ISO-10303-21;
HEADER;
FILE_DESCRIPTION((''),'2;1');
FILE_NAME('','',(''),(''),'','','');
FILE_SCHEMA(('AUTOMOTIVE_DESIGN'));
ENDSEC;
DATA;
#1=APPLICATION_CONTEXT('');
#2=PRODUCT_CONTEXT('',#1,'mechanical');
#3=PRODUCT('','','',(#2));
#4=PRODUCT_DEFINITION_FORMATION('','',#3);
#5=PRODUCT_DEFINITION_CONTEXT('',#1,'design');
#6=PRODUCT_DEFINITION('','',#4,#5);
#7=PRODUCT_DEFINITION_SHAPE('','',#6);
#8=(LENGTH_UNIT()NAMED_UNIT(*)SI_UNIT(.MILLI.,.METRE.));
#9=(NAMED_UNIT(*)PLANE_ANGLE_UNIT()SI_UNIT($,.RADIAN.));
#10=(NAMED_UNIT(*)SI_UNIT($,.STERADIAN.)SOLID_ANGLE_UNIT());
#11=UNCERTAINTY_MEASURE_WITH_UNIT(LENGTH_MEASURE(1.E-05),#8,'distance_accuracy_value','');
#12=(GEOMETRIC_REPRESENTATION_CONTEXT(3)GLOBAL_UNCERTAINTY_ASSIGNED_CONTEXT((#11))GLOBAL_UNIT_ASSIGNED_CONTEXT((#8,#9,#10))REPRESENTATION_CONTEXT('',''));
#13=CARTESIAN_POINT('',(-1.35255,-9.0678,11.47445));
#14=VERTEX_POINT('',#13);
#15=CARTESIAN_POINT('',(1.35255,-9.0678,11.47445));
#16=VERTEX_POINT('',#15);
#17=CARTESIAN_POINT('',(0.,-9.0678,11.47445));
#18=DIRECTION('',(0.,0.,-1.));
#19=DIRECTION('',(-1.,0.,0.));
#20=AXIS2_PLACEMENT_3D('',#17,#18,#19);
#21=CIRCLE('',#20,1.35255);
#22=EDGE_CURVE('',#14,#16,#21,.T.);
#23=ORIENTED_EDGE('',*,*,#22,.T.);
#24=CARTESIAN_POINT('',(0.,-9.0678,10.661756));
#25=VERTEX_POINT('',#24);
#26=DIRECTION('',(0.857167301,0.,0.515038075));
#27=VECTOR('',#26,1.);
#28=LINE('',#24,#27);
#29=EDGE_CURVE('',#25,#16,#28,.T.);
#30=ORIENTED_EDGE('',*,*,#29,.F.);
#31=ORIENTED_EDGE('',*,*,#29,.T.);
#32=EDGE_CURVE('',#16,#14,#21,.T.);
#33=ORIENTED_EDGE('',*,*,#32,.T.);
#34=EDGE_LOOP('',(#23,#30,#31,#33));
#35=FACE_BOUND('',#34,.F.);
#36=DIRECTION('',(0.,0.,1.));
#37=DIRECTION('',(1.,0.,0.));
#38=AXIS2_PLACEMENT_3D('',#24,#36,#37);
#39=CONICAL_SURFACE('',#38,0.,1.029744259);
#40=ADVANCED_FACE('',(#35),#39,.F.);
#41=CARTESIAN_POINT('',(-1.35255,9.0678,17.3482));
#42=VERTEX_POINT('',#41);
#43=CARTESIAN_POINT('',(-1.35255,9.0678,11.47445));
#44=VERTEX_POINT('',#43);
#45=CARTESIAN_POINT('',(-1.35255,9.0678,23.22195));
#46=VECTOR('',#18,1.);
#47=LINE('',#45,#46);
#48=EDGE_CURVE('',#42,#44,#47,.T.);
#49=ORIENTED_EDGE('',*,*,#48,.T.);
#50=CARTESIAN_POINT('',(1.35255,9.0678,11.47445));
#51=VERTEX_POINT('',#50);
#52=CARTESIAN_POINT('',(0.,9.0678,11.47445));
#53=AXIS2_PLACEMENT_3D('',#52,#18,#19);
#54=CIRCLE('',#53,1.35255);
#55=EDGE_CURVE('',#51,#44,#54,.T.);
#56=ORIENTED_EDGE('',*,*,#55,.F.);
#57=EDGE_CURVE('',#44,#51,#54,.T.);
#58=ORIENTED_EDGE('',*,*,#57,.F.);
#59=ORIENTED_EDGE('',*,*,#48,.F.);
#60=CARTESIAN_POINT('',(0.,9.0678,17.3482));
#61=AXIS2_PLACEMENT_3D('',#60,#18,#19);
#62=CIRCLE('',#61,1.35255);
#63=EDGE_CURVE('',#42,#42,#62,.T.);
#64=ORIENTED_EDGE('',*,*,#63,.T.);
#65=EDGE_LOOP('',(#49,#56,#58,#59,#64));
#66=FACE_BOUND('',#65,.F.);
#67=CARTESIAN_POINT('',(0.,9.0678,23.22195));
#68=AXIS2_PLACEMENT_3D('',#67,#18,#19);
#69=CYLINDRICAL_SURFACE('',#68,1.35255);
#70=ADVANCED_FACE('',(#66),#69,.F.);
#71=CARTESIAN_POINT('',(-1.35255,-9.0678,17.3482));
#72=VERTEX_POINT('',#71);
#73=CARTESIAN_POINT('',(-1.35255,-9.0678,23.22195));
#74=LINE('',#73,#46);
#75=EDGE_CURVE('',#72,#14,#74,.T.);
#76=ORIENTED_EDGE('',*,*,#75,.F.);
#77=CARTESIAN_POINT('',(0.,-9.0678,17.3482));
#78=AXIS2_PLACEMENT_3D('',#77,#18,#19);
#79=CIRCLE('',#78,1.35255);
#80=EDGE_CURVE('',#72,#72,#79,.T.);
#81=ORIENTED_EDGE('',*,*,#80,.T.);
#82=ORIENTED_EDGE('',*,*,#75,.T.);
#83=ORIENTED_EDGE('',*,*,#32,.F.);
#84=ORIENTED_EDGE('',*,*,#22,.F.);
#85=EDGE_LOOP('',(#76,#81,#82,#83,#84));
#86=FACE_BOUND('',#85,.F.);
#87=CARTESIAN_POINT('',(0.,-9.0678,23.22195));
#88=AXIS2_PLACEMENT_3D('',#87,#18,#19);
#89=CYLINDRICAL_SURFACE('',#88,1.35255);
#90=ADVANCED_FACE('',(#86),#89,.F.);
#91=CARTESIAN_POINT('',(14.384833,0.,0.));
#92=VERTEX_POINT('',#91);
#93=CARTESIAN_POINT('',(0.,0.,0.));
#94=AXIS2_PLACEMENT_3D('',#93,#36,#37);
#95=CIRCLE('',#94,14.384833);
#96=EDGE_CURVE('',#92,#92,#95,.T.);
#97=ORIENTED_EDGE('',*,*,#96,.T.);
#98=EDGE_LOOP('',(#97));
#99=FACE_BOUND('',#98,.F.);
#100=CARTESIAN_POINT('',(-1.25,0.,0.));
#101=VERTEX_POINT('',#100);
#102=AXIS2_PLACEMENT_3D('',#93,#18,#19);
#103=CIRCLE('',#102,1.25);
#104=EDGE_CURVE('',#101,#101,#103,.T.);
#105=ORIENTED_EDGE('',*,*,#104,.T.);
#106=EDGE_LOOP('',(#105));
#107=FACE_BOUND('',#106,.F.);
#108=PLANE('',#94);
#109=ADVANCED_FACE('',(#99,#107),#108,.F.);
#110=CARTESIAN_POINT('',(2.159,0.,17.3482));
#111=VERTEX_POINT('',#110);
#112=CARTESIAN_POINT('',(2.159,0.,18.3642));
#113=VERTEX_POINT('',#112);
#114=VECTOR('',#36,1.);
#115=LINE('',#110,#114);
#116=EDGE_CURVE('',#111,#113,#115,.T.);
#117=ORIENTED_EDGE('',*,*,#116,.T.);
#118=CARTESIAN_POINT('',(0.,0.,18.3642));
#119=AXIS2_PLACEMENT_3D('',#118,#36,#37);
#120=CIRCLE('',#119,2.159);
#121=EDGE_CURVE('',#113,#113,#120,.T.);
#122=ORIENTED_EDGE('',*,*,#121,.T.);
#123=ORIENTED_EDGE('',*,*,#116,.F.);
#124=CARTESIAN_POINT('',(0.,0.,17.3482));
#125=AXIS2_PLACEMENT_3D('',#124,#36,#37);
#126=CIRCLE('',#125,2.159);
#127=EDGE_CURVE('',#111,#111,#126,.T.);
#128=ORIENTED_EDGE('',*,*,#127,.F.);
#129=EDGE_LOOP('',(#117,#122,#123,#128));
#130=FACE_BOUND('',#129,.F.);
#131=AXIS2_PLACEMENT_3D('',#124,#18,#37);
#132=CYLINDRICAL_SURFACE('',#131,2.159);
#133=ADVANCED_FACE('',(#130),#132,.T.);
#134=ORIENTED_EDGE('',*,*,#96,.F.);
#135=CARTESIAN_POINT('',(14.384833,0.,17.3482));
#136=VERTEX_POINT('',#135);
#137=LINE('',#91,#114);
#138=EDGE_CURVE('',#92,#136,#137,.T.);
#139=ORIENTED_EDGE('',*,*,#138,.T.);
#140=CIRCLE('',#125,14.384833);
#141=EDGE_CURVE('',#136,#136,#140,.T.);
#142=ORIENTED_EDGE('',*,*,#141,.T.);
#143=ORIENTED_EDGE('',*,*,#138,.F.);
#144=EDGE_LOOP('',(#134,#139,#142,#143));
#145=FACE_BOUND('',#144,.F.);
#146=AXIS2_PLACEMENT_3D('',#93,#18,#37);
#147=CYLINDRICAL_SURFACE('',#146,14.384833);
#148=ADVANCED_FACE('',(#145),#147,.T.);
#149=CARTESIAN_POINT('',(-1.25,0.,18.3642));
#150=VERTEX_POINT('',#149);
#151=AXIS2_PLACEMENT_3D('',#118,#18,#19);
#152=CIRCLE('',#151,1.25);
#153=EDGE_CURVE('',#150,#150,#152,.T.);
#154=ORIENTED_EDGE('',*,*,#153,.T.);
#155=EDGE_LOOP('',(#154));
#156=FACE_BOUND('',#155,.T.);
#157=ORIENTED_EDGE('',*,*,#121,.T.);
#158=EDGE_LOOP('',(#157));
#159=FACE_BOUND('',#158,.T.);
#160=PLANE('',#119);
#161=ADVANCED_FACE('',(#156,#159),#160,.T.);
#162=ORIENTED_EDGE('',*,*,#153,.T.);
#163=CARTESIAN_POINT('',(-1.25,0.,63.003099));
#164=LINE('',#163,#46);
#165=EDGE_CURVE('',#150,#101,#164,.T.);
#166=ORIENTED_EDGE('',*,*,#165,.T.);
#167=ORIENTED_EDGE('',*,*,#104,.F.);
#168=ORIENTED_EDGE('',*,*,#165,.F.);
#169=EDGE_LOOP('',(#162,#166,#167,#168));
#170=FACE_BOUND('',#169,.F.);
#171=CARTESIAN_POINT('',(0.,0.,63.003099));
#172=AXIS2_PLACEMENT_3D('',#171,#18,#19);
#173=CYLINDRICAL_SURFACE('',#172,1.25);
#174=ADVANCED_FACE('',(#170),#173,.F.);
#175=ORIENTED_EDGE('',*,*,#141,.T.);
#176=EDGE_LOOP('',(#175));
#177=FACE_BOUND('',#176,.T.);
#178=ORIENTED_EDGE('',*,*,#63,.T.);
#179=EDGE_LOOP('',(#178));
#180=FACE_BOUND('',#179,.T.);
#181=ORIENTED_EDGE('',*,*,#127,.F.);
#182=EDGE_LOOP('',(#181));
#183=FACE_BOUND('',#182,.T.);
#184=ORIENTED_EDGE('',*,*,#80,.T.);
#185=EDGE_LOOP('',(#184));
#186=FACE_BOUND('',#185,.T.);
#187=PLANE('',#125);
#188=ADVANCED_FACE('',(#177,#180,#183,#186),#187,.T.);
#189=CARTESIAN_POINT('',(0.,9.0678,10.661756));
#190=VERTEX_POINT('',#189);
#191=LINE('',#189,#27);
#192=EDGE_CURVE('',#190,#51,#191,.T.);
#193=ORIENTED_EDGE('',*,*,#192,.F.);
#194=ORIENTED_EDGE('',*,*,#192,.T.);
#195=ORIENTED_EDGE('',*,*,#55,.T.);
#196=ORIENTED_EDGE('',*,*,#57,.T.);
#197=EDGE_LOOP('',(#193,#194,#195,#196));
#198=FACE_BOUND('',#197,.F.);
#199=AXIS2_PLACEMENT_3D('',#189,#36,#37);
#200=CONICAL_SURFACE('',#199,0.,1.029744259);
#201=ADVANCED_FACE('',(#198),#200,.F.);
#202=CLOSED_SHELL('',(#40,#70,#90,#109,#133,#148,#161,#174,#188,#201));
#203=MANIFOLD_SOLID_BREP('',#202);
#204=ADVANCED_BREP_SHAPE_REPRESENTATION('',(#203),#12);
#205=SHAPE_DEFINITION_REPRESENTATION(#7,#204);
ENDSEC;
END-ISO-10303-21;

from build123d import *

# Parameters (mm, degrees)
F0_R     = 14.3848333842
F1_DEPTH = 17.3482
F4_R     = 2.159
F5_DEPTH = 1.016
F6_D     = 2.7051
F6_DEPTH = 5.87375
F6_TIP   = 0.8126940303
F8_D     = 2.5


# Not quite as in the source:
# - a feature names something its author has since deleted; it is built from what else it names


with BuildPart() as f1:
    # F0 (on Top) → F1 (new body)
    with BuildSketch(Plane.XY):
        Circle(F0_R)
    extrude(amount=F1_DEPTH)

    # F4 (on face) → F5 (join)
    with BuildSketch(Plane.XY.offset(17.3482)):
        Circle(F4_R)
    extrude(amount=F5_DEPTH)

    # F6
    with Locations(Plane.XY.offset(17.3482)):
        with Locations((0, 9.0678), (0, -9.0678)):
            Hole(F6_D / 2, depth=F6_DEPTH)
            with Locations((0, 0, -(F6_DEPTH + F6_TIP / 2))):  # 118° drill point
                Cone(0, F6_D / 2, F6_TIP, mode=Mode.SUBTRACT)

    # F8 (through all)
    with Locations(Plane.XY.offset(18.3642)):
        with Locations((0, 0)):
            Hole(F8_D / 2)


solid = f1.part
